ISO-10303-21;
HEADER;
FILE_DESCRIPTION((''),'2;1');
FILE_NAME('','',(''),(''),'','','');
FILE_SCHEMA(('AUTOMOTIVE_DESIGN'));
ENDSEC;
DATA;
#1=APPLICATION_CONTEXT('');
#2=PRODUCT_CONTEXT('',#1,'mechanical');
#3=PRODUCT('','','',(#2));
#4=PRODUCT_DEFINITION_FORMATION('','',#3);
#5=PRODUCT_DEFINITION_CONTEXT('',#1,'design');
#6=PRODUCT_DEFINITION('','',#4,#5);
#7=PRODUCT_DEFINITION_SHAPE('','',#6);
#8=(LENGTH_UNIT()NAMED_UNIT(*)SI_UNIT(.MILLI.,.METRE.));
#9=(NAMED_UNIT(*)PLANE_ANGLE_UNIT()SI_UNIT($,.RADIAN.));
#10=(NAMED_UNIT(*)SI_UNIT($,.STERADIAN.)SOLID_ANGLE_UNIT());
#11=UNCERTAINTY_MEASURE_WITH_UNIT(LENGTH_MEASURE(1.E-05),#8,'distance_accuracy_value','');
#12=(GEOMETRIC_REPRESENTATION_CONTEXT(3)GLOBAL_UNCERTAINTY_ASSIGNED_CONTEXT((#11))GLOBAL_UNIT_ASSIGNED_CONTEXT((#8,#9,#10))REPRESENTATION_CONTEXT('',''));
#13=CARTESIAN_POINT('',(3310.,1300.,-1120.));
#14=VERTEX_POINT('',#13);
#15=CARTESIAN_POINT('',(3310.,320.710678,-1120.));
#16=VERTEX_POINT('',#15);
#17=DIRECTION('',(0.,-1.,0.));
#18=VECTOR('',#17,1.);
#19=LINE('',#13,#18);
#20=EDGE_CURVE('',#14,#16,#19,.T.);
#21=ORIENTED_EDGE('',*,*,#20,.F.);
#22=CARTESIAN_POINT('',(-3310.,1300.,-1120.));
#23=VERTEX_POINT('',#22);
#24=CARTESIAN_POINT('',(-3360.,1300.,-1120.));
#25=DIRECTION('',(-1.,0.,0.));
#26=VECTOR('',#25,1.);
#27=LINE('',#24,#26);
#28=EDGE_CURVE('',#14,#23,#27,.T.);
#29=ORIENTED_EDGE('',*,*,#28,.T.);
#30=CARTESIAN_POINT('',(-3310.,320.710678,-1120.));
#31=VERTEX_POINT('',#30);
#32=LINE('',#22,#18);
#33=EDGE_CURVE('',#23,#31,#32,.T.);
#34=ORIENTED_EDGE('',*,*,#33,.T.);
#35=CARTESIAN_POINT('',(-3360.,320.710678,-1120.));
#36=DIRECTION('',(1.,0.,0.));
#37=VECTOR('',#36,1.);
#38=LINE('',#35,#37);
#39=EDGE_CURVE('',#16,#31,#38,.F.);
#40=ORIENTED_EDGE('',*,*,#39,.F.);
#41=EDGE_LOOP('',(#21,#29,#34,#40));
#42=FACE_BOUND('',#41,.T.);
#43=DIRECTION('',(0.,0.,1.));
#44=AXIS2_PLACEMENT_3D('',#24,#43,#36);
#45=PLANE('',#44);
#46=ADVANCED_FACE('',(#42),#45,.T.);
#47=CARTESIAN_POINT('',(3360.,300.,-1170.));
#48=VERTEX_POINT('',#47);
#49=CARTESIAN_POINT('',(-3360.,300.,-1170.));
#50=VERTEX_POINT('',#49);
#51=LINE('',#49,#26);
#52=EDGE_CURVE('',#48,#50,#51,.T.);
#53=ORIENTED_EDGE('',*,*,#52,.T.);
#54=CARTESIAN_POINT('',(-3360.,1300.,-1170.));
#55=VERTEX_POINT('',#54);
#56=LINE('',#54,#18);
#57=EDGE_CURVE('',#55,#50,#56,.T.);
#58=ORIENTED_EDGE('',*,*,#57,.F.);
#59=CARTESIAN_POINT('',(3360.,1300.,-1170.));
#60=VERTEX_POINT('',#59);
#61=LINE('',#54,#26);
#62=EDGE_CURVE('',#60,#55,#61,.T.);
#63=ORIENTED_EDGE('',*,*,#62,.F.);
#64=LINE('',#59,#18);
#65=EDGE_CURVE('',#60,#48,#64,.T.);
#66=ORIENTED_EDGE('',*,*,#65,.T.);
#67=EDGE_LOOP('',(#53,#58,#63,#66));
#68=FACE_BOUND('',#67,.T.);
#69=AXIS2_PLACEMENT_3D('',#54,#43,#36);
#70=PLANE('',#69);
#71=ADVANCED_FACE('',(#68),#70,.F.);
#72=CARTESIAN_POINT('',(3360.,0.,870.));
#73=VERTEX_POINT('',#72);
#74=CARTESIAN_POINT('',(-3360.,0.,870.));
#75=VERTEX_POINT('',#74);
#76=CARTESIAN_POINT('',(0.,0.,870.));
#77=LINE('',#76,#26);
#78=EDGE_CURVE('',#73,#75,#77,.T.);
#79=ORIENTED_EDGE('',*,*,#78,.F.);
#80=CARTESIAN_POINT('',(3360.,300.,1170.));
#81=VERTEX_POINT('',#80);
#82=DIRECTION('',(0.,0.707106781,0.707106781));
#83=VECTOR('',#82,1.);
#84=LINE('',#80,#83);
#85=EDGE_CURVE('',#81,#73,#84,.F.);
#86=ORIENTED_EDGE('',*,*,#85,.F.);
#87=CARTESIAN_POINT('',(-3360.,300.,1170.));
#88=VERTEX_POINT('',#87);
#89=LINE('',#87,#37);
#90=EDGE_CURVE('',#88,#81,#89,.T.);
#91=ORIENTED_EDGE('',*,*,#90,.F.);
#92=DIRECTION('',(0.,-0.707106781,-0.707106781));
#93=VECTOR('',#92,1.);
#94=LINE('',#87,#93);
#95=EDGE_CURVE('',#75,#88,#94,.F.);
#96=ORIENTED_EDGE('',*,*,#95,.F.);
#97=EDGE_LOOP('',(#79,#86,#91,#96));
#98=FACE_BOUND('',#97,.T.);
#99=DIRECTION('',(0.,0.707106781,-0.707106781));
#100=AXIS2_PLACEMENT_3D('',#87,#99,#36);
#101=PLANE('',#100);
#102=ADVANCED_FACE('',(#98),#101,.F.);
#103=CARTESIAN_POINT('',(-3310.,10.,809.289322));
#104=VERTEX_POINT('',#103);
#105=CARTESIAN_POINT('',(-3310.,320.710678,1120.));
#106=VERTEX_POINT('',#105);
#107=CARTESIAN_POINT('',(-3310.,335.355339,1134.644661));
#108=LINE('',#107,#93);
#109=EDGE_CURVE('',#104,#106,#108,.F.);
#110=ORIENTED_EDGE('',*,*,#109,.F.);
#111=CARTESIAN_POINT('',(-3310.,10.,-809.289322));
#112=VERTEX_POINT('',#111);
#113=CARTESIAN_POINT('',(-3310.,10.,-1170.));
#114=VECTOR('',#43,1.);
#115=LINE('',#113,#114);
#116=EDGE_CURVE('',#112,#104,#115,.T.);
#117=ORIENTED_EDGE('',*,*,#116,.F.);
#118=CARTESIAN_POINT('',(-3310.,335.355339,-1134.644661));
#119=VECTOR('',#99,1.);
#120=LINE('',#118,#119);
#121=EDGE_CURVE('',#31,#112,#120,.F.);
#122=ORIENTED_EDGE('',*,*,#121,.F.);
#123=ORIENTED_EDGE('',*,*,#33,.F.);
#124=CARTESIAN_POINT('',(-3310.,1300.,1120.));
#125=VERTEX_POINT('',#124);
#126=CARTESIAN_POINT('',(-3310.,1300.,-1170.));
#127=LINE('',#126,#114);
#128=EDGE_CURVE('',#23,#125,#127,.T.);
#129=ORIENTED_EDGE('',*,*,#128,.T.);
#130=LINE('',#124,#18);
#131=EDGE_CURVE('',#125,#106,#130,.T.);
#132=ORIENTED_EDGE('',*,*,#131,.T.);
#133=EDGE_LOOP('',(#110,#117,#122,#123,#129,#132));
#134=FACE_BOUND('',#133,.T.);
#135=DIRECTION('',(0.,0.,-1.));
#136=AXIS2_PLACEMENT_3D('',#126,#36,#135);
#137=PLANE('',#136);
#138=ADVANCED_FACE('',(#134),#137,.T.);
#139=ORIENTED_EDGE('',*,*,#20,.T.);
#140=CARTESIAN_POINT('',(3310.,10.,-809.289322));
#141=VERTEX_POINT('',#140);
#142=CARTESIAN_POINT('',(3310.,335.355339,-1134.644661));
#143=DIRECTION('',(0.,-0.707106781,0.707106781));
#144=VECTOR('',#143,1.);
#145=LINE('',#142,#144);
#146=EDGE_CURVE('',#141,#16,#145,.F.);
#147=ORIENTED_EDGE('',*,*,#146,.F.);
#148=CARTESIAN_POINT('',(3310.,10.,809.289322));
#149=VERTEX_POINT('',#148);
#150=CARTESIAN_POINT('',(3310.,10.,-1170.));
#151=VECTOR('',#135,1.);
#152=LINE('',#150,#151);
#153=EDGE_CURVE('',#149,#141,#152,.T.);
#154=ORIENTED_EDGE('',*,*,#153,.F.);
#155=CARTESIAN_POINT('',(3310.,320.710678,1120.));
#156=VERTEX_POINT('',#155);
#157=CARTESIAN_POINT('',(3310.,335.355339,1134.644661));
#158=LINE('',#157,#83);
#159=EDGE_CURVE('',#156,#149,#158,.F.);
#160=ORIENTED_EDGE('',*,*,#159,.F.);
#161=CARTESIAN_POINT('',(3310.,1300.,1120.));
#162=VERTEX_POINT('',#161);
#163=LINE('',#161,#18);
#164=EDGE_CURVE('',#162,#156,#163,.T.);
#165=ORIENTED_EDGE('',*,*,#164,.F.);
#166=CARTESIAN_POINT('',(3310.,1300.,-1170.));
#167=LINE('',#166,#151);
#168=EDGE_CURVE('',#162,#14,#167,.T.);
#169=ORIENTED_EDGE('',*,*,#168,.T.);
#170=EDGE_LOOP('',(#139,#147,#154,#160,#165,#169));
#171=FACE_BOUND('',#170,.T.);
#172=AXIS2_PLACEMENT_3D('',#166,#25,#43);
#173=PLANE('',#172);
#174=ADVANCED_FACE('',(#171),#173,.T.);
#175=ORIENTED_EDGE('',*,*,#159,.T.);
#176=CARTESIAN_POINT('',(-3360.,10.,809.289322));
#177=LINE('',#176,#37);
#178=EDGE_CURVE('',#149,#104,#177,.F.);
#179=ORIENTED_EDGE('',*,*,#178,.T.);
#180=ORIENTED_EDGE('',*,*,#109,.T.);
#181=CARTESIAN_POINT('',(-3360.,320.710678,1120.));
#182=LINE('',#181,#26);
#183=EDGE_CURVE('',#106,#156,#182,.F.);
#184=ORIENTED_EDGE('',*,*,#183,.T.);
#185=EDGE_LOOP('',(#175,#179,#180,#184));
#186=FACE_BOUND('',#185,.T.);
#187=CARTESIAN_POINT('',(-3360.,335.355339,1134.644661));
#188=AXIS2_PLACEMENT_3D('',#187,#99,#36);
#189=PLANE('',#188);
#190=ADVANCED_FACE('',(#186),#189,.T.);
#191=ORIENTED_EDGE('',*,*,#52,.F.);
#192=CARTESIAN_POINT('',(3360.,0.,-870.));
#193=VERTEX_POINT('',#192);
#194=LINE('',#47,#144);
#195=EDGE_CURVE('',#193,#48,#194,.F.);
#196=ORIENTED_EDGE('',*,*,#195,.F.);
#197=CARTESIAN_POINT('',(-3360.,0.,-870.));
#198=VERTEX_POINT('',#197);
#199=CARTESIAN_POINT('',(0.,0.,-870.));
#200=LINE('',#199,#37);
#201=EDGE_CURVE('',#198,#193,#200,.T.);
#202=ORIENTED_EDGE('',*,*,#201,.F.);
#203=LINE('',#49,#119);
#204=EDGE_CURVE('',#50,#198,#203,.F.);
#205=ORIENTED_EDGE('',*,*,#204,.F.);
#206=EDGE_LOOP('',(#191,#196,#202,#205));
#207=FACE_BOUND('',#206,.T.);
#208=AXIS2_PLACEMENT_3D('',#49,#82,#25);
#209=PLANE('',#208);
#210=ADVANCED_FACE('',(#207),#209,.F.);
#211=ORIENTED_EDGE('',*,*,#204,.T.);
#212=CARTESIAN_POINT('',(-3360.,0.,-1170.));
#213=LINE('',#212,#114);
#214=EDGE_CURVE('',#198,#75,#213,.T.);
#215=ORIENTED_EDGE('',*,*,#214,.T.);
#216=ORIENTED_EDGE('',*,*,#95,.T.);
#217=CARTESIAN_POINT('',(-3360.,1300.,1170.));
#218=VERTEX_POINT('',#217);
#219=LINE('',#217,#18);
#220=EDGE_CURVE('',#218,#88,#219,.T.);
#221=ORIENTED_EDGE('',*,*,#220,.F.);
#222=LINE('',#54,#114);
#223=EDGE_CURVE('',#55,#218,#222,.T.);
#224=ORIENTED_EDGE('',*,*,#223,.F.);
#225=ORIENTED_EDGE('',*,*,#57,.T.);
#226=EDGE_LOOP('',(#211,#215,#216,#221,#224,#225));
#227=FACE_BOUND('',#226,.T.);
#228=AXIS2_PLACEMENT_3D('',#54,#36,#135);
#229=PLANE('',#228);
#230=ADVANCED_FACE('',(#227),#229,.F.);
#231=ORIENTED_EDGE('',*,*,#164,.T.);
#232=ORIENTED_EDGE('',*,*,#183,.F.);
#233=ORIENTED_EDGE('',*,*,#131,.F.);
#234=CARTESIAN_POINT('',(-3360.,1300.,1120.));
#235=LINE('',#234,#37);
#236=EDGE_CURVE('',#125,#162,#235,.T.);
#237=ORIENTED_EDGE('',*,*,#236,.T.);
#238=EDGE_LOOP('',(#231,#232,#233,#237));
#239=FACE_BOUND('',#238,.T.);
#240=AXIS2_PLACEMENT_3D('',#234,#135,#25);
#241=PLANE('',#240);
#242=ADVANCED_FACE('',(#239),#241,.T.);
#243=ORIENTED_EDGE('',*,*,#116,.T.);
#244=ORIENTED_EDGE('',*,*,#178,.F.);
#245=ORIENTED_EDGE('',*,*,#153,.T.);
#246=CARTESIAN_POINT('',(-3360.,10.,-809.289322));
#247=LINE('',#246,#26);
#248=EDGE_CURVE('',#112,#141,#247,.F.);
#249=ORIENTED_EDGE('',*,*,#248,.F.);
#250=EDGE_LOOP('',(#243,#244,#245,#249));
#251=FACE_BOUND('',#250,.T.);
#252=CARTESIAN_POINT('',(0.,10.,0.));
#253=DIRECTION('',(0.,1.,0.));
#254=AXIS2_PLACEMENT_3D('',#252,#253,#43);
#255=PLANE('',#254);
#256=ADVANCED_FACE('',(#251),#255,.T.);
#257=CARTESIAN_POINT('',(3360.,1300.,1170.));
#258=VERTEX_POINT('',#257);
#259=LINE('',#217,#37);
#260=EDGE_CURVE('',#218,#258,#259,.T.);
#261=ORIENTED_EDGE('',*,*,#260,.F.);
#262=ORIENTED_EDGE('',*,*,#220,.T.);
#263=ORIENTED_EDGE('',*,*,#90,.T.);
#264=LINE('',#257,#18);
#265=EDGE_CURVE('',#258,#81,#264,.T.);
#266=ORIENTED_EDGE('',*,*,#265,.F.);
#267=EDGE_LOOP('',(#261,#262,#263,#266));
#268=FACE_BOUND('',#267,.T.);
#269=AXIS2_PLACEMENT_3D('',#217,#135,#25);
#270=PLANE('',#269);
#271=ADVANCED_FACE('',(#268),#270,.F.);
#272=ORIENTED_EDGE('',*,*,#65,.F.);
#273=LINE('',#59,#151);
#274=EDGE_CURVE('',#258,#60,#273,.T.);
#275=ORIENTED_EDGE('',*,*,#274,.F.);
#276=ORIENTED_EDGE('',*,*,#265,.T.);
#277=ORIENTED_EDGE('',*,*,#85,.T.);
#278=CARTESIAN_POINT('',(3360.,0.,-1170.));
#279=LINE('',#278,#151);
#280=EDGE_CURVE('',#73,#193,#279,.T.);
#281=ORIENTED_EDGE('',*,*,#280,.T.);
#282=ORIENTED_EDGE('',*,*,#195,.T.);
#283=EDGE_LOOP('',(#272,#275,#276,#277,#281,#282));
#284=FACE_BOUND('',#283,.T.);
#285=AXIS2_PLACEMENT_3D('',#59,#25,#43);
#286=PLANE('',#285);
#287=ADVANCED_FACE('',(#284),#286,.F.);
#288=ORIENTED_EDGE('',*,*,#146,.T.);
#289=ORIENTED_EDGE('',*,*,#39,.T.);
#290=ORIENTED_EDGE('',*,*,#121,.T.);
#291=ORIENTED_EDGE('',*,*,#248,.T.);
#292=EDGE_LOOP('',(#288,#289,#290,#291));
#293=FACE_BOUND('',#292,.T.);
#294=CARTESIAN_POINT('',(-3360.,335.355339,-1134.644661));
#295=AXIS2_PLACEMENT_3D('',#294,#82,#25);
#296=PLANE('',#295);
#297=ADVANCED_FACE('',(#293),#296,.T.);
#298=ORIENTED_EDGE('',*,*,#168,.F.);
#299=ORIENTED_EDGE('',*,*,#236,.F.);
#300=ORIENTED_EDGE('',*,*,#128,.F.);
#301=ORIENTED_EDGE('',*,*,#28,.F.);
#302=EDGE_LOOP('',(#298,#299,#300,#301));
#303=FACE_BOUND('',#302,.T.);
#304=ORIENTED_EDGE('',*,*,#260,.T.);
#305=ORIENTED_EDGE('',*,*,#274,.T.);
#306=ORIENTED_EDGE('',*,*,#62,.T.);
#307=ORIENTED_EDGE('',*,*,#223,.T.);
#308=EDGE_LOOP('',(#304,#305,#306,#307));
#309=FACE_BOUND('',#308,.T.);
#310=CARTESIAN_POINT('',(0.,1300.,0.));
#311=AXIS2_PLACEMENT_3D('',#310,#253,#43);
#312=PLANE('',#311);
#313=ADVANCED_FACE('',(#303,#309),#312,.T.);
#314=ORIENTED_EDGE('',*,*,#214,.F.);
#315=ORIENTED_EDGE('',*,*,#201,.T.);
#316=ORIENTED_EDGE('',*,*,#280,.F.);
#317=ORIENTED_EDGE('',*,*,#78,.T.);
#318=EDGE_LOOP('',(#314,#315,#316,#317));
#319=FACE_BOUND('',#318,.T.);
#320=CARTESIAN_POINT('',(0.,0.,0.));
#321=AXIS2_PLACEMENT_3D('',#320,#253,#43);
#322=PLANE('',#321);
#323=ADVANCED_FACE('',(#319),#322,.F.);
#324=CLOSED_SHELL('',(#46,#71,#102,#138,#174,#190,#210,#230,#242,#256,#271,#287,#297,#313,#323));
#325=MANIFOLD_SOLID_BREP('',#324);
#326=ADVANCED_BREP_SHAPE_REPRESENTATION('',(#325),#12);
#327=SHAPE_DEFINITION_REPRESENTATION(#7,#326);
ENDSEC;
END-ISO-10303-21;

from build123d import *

# Parameters (mm, degrees)
SKETCH1_W           = 6720
SKETCH1_H           = 2340
BOSS_EXTRUDE1_DEPTH = 1300
CHAMFER1_SIZE       = 300
SHELL1_START        = -3310
SHELL1_DEPTH        = 6620


# Read off the part's stored shape, not the designer's step: Shell1
with BuildPart() as part:
    # Sketch1 → Boss-Extrude1 (new body)
    with BuildSketch(Plane(origin=(0, 0, 0), x_dir=(1, 0, 0), z_dir=(0, 1, 0))):
        Rectangle(SKETCH1_W, SKETCH1_H)
    extrude(amount=BOSS_EXTRUDE1_DEPTH)

    # Chamfer1
    chamfer1_edges = [part.edges().sort_by_distance(p)[0] for p in [
        (0, 0, 1170),
        (0, 0, -1170),
    ]]
    chamfer(chamfer1_edges, length=CHAMFER1_SIZE)

    # Shell1 outline → Shell1 (cut)
    with BuildSketch(Plane.YZ.offset(SHELL1_START)):
        Polygon((320.710678119, -1120), (1300, -1120), (1300, 1120), (320.710678119, 1120), (10, 809.289321881), (10, -809.289321881), align=None)
    extrude(amount=SHELL1_DEPTH, mode=Mode.SUBTRACT)


solid = part.part
